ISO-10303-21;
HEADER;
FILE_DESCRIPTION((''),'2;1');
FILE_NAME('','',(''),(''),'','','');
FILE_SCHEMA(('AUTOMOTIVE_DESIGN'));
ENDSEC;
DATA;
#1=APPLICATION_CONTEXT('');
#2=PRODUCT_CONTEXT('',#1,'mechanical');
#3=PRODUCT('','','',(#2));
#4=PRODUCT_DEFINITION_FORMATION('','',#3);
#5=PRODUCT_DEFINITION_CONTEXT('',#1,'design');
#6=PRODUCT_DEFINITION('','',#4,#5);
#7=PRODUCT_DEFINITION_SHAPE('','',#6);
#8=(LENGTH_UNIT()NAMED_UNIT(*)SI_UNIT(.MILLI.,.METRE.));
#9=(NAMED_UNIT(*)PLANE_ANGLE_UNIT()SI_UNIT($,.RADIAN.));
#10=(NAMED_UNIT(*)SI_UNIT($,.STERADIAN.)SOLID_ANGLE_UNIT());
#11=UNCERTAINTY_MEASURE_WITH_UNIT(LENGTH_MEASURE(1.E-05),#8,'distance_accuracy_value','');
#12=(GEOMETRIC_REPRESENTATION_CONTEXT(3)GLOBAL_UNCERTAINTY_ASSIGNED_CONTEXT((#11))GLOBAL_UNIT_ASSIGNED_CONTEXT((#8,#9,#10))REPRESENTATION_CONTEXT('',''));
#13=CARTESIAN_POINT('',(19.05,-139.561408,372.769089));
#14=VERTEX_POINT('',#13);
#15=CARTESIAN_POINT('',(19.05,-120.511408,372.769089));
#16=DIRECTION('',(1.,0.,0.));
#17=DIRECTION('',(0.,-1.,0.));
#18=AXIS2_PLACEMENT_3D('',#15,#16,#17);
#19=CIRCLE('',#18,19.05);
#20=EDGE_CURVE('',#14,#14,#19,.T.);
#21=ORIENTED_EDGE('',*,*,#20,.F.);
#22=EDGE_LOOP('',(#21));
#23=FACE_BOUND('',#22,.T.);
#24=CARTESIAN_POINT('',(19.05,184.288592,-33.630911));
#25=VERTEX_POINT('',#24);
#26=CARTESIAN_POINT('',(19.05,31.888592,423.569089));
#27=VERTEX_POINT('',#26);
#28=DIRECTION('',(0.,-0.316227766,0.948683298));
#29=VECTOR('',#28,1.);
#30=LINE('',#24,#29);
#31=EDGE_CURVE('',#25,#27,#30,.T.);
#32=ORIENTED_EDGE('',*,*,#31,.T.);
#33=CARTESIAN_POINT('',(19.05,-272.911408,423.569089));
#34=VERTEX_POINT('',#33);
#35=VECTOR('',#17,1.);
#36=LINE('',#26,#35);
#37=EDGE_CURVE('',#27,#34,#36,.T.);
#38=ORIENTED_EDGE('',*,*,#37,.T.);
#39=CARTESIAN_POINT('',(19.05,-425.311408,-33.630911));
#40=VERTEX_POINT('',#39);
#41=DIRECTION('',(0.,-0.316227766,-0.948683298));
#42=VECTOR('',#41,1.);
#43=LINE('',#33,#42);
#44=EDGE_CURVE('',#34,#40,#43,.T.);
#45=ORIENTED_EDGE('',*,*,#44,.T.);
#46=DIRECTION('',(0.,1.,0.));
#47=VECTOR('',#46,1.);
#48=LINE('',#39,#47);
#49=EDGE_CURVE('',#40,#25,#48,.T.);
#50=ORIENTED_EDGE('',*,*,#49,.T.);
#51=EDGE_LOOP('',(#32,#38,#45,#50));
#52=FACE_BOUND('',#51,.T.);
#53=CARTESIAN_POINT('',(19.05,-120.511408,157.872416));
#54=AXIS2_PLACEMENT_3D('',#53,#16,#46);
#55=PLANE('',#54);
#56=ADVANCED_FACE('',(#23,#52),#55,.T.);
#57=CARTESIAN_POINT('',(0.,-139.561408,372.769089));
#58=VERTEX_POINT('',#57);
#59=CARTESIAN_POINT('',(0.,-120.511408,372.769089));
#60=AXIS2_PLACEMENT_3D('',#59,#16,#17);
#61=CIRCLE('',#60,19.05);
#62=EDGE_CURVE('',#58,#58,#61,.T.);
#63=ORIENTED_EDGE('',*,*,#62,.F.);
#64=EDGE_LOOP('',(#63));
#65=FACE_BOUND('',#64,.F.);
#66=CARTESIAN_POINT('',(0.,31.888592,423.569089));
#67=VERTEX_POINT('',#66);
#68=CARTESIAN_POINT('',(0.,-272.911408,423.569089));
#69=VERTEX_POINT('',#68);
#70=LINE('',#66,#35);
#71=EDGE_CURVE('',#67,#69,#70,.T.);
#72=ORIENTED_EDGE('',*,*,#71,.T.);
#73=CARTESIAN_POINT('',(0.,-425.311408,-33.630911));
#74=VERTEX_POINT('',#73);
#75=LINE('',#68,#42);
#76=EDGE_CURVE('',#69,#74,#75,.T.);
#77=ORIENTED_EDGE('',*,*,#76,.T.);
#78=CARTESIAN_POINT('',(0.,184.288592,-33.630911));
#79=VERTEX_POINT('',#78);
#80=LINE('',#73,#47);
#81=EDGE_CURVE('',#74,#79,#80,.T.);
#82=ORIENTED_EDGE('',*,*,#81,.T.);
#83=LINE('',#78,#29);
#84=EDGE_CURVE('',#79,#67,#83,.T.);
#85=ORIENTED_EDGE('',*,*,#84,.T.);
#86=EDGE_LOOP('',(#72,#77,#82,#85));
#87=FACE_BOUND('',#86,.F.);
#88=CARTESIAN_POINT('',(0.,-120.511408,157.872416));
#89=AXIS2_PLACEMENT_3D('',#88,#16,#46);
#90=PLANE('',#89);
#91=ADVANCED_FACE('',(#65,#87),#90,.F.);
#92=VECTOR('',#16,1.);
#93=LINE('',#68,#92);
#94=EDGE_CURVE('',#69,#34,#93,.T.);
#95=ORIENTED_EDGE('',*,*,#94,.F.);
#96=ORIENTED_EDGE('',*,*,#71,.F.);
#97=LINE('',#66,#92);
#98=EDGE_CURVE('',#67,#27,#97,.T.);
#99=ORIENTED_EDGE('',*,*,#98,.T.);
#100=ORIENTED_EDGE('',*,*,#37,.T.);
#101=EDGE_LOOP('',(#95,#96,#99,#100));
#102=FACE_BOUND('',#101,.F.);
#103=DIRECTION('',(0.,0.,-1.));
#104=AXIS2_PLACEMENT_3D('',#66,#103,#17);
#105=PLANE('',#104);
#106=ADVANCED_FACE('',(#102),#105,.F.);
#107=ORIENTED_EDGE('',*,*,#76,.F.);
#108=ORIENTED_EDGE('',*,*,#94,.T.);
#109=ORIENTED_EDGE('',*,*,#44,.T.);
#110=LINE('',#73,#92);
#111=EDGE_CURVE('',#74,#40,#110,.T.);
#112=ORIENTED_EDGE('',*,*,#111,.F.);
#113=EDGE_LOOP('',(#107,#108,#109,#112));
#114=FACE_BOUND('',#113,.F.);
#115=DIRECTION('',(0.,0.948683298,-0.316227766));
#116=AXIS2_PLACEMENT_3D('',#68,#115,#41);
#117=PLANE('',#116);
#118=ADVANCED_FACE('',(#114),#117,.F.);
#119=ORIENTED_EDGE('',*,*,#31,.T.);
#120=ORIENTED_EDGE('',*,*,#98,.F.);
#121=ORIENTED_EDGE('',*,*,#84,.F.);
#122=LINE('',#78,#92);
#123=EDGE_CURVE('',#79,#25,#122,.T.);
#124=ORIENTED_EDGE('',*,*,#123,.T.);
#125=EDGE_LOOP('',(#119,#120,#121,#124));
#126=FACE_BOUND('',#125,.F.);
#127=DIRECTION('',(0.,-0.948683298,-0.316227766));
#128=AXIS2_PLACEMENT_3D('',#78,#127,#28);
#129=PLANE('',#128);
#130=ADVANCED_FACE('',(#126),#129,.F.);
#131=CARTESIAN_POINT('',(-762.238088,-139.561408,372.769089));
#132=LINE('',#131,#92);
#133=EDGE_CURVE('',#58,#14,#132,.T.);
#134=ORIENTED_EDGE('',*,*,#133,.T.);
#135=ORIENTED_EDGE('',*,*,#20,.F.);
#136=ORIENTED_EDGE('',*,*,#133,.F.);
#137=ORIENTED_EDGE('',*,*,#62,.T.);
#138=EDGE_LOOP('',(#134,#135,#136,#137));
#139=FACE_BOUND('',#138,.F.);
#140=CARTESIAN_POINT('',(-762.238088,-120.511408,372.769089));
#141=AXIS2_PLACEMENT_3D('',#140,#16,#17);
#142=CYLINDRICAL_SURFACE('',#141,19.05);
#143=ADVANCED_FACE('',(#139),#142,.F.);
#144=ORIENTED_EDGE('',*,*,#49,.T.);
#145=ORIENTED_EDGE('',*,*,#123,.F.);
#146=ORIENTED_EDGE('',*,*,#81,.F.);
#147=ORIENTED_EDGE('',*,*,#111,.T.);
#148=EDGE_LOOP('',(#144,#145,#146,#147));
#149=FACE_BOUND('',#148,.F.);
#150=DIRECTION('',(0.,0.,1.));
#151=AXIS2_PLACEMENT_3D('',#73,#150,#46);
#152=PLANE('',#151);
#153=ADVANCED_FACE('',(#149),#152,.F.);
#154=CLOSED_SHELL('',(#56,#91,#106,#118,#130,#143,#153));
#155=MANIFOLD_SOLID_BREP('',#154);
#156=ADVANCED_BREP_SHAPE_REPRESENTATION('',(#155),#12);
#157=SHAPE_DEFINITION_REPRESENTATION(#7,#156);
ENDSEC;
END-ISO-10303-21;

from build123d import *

# Parameters (mm, degrees)
F1_DEPTH = 19.05
F4_D     = 38.1


# Not quite as in the source:
# - the program builds the solid bodies; features that only make, move or delete a surface that nothing else refers to are left out


with BuildPart() as f1:
    # F0 (on Right) → F1 (new body)
    with BuildSketch(Plane.YZ):
        Polygon((-425.3114081136, -33.6309112608), (-272.9114081136, -33.6309112608), (31.8885918864, -33.6309112608), (184.2885918864, -33.6309112608), (31.8885918864, 423.5690887392), (-272.9114081136, 423.5690887392), align=None)
    extrude(amount=F1_DEPTH)

    # F4 (through all)
    with Locations(Plane(origin=(0, 0, 0), x_dir=(0, 1, 0), z_dir=(-1, 0, 0))):
        with Locations((-120.5114081136, -372.7690887392)):
            Hole(F4_D / 2)


solid = f1.part
